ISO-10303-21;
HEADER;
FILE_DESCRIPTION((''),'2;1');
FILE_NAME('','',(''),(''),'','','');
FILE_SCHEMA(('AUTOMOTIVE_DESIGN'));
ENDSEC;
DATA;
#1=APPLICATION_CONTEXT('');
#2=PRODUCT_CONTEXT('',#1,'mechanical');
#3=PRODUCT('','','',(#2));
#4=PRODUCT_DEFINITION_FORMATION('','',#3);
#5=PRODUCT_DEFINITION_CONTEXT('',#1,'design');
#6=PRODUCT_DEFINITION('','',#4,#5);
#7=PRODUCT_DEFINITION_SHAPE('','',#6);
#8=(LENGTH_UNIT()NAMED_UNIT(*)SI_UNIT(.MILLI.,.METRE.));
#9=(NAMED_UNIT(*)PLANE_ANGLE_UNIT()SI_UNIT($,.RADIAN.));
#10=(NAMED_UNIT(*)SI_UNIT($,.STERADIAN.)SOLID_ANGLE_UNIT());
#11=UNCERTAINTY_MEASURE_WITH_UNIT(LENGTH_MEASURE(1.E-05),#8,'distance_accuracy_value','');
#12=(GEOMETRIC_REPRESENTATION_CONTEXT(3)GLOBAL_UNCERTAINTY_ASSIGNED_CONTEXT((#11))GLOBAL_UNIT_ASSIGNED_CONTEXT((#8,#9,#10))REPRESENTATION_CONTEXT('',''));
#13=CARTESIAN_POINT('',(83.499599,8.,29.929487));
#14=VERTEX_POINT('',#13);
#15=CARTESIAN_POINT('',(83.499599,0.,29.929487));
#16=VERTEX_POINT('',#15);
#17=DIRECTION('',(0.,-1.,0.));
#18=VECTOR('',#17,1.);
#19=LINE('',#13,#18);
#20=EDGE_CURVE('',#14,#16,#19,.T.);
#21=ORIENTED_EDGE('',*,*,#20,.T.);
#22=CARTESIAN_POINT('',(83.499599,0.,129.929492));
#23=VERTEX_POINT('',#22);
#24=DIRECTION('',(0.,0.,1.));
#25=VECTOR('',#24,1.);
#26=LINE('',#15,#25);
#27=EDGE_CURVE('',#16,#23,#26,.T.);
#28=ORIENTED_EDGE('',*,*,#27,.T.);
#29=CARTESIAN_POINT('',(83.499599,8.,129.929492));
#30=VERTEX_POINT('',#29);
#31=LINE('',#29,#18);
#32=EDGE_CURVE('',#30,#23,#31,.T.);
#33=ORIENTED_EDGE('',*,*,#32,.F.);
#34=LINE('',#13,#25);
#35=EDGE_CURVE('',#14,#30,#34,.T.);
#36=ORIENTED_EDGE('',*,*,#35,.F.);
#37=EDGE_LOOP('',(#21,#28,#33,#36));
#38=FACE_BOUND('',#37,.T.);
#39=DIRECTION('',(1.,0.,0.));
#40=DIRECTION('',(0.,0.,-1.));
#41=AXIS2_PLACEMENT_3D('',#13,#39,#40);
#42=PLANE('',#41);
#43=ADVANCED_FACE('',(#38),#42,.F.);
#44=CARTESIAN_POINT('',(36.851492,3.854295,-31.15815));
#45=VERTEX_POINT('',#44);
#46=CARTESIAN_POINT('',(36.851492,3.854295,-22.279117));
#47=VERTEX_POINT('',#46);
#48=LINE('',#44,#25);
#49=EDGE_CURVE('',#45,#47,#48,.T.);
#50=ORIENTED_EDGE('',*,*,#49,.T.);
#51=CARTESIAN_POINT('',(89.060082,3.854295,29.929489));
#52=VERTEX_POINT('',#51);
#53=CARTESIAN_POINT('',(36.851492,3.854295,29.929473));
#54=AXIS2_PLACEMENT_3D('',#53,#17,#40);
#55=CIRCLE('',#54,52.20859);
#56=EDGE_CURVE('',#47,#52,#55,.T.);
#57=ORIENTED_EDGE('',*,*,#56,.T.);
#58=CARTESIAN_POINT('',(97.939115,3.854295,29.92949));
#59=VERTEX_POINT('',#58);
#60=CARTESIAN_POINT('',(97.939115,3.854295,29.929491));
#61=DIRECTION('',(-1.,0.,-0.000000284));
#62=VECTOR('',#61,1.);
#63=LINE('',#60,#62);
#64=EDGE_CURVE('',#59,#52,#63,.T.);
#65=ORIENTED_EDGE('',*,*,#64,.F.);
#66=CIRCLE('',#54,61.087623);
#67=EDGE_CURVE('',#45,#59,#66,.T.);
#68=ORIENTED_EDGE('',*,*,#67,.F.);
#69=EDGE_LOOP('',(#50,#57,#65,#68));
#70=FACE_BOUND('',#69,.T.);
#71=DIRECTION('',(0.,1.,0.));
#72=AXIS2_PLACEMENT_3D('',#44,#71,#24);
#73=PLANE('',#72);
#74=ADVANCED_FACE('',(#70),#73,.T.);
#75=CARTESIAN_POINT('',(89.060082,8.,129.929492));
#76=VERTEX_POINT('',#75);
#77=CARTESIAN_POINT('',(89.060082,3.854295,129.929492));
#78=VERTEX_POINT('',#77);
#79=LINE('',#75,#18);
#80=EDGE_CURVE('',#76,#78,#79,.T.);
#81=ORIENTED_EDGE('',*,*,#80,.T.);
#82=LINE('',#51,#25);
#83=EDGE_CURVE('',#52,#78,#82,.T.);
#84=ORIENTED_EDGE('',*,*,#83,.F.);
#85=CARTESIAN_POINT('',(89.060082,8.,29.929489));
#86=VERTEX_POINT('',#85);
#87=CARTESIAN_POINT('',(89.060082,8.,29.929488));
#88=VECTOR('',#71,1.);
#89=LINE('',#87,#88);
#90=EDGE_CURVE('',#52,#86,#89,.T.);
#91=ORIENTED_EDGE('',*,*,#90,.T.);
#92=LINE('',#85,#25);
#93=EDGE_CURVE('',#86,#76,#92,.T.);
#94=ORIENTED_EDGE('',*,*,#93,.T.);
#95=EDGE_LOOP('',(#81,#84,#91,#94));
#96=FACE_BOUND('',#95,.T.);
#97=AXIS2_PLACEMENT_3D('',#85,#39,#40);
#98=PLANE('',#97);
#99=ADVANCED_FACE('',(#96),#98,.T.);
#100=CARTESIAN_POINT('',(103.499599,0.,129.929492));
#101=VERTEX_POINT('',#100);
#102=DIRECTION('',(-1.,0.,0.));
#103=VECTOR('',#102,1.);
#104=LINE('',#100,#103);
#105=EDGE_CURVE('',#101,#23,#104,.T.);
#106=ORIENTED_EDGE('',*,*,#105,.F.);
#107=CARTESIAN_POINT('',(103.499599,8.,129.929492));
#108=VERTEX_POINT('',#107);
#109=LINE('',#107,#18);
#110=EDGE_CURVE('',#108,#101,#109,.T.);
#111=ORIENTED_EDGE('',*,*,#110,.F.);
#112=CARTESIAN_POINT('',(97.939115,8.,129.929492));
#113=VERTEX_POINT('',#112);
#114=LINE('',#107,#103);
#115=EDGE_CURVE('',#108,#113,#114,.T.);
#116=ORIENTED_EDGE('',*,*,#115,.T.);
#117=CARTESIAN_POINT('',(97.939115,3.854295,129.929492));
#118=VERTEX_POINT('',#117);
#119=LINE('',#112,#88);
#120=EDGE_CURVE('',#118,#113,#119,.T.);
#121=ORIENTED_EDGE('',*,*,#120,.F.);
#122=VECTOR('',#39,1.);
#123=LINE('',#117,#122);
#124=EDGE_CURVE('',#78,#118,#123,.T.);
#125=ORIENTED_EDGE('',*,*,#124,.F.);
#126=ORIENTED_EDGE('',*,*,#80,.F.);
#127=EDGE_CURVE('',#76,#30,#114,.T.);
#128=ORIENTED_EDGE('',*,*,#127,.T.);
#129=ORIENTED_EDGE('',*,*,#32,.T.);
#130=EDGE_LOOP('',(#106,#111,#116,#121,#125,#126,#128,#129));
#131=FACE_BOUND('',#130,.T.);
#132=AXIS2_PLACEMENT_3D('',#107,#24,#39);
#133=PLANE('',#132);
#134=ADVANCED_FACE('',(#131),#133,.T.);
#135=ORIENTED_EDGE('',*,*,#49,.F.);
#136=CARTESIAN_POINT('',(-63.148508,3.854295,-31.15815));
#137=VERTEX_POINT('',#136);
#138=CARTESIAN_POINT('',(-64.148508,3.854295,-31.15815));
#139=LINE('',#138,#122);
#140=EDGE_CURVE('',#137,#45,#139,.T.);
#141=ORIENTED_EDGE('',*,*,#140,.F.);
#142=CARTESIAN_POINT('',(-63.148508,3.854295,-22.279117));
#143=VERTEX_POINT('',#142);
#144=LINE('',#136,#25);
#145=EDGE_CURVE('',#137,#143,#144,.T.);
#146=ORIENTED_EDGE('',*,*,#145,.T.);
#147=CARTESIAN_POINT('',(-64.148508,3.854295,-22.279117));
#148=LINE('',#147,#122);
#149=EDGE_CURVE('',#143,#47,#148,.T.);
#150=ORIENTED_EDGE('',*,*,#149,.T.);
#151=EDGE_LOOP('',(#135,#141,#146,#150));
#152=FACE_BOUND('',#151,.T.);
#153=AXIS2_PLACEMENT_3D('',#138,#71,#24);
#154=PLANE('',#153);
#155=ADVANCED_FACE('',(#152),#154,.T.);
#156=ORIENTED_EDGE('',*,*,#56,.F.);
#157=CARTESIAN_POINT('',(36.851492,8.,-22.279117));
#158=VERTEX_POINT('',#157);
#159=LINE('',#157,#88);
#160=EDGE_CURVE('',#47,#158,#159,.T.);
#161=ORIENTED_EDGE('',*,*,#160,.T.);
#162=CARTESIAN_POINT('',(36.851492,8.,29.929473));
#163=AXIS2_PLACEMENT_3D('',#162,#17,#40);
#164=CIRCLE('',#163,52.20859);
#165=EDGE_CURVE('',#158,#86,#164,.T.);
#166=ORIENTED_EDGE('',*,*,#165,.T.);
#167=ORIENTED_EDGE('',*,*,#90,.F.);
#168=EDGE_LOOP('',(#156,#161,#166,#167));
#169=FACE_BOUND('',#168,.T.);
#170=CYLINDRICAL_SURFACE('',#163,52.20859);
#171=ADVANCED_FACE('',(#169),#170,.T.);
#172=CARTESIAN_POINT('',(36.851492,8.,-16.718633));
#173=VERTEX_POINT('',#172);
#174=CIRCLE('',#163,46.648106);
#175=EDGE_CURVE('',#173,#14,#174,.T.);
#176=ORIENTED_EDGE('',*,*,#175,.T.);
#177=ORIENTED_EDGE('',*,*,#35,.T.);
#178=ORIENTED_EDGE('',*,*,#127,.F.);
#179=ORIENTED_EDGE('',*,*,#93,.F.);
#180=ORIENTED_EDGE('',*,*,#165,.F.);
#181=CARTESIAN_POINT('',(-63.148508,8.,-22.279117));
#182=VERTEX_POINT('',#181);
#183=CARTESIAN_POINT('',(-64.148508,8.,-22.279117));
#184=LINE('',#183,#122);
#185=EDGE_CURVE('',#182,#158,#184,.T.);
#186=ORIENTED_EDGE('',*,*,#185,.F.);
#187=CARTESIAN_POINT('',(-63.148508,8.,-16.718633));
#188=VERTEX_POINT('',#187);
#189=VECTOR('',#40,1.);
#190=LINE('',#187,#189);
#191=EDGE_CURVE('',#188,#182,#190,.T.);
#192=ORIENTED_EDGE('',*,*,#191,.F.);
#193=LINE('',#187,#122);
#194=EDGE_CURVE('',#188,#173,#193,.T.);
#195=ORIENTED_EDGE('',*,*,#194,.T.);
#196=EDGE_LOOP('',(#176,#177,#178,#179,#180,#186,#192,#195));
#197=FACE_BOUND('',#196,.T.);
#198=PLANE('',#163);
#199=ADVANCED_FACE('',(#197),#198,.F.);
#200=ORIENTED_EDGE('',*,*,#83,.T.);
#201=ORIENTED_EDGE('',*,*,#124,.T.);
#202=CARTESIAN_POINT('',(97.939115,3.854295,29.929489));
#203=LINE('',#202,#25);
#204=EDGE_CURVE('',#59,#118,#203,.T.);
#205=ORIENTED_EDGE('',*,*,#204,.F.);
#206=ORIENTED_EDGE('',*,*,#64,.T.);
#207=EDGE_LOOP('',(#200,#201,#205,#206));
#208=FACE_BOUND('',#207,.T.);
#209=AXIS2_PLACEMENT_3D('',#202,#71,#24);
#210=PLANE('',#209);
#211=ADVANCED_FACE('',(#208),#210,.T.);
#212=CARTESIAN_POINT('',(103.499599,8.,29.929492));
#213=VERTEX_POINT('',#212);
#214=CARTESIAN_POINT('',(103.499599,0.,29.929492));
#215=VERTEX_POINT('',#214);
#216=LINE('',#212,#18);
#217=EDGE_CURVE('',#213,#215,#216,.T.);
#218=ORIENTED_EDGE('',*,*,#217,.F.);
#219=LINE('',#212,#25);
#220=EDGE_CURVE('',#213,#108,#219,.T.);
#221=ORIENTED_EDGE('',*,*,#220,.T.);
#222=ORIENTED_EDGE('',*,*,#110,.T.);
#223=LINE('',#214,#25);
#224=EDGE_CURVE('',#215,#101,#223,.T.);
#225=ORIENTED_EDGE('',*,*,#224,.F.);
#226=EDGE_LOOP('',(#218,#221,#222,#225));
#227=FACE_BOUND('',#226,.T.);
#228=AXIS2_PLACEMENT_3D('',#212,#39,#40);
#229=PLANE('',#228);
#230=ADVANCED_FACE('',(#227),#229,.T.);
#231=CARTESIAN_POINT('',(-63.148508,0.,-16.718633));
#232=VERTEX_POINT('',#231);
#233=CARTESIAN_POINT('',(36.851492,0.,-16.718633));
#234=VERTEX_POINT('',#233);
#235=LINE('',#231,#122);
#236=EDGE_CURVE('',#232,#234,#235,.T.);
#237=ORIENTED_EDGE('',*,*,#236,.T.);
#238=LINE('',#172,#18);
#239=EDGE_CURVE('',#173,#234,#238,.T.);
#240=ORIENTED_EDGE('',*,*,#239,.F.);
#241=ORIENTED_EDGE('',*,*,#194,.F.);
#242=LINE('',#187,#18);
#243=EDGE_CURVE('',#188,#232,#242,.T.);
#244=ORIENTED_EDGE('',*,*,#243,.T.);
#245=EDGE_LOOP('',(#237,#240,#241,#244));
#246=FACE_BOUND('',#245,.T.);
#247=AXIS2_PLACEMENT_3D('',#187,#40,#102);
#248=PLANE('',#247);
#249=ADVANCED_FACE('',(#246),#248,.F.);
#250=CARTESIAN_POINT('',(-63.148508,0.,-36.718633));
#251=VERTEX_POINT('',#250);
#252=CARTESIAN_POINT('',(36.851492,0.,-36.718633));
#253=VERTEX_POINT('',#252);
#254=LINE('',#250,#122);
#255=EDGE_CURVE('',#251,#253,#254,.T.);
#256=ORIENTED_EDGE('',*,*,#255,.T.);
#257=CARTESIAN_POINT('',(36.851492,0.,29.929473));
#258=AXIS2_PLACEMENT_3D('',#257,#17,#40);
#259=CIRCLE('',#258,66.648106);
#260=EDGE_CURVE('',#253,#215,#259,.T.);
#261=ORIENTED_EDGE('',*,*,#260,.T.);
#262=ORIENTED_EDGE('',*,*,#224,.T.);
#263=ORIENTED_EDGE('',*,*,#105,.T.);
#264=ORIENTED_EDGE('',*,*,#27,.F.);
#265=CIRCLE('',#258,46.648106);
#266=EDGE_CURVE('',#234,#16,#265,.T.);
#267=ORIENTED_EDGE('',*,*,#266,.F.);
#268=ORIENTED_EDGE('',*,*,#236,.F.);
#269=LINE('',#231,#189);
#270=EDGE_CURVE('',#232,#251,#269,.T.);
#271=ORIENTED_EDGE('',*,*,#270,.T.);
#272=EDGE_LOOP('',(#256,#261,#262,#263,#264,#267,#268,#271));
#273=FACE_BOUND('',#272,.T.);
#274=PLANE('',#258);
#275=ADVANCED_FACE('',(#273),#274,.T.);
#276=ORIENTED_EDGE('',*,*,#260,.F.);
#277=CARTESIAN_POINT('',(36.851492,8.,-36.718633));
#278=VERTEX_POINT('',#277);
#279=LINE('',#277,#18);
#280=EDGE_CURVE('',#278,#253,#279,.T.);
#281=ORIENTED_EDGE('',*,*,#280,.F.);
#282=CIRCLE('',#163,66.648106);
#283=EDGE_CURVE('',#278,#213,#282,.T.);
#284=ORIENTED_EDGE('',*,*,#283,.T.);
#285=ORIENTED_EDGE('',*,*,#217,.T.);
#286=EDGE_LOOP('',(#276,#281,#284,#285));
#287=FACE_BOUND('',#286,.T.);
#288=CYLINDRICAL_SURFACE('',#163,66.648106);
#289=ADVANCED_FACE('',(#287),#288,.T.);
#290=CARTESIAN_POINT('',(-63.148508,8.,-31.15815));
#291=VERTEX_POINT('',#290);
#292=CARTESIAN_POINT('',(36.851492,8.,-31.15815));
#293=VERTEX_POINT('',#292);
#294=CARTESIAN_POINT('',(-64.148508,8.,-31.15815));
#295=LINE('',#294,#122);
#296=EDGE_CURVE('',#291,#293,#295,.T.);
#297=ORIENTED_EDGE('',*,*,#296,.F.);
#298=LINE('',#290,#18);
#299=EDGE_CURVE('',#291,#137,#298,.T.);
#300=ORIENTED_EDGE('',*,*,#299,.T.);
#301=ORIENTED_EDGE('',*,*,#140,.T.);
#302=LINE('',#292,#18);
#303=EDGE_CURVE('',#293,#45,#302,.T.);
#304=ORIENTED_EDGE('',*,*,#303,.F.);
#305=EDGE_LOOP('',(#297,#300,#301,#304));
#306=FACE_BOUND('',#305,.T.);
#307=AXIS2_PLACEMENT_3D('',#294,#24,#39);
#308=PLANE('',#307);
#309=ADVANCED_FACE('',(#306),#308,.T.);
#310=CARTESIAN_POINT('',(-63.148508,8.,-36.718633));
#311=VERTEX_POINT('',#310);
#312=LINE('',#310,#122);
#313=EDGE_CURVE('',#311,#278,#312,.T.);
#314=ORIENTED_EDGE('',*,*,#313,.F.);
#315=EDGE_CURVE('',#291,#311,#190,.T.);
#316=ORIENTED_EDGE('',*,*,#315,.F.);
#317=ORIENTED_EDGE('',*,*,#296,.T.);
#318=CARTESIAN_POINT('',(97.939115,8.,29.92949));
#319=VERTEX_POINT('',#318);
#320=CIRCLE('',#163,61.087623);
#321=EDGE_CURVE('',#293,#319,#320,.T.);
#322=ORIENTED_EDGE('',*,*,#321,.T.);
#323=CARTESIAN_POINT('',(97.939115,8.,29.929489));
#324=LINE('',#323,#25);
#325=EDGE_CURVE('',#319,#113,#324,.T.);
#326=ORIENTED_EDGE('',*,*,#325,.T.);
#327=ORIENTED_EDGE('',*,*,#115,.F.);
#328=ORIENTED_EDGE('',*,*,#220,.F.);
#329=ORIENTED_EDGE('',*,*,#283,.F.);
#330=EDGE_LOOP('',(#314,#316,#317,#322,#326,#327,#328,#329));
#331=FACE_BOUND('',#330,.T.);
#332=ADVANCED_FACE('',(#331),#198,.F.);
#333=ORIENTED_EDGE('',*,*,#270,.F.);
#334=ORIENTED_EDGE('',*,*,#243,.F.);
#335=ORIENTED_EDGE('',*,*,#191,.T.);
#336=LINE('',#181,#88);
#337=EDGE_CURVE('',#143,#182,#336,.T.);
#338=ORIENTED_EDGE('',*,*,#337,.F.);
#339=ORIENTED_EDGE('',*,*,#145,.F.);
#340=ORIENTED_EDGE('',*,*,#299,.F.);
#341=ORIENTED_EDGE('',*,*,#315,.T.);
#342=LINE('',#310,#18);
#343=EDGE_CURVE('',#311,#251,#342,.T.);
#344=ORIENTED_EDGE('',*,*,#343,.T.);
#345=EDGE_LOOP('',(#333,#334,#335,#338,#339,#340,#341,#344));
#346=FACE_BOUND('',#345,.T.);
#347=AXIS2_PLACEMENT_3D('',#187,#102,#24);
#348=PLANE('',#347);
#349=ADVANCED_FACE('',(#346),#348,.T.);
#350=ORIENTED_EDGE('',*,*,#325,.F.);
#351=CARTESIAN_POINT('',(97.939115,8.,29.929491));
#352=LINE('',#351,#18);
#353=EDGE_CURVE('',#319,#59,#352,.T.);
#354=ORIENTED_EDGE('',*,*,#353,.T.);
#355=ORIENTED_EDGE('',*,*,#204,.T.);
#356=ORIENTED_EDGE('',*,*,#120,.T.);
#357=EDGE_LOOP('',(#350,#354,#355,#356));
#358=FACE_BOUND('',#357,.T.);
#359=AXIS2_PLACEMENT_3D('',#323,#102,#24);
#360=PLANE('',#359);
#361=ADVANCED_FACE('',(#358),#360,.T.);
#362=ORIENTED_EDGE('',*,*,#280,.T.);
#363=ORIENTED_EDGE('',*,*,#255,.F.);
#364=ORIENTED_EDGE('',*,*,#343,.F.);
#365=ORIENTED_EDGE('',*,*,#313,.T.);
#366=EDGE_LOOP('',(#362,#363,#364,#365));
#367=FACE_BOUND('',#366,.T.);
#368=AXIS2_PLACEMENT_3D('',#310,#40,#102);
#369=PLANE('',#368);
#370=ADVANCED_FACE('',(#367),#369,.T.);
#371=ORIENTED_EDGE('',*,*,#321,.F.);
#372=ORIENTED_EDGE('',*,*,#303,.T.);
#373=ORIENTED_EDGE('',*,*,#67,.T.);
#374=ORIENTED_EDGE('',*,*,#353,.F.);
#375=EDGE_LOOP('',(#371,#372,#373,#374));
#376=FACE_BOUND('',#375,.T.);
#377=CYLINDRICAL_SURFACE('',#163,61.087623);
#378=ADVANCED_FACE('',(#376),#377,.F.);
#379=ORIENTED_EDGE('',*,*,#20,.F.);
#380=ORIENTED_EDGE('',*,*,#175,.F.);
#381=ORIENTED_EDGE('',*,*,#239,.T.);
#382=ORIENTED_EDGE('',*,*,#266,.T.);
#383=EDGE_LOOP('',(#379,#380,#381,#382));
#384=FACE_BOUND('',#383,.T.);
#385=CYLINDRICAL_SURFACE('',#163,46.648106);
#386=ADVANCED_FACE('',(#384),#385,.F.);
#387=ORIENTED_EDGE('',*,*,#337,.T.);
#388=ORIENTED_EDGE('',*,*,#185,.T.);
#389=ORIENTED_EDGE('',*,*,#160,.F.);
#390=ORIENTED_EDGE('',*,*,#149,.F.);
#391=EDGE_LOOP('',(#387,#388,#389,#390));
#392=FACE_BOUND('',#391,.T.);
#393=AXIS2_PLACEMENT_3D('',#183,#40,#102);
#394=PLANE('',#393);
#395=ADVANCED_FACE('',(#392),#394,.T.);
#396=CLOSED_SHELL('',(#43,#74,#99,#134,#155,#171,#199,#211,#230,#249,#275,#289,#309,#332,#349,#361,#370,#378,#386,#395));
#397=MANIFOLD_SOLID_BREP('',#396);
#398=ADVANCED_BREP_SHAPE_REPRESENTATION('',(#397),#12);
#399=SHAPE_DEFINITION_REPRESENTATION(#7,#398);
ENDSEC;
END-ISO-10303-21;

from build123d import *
from OCP.BRepAlgoAPI import BRepAlgoAPI_Cut
from OCP.TopTools import TopTools_ListOfShape

# Parameters (mm, degrees)
BOSS_EXTRUDE1_DEPTH = 8
SKETCH3_W           = 8.879033142
SKETCH3_H           = 4.145705198


with BuildPart() as part:
    # Sketch1 → Boss-Extrude1 (new body)
    with BuildSketch(Plane(origin=(0, 0, 0), x_dir=(1, 0, 0), z_dir=(0, 1, 0))):
        with BuildLine():
            Line((-63.148507742, 16.718633156), (36.851492258, 16.718633156))
            ThreePointArc((36.851492258, 16.718633156), (69.836689376, 3.055714409), (83.499598758, -29.92948659))
            Line((83.499598758, -29.92948659), (83.499598758, -129.929492269))
            Line((83.499598758, -129.929492269), (103.499598758, -129.929492269))
            Line((103.499598758, -129.929492269), (103.499598758, -29.929492269))
            ThreePointArc((103.499598758, -29.929492269), (83.978827008, 17.197848025), (36.851492258, 36.718633156))
            Line((36.851492258, 36.718633156), (-63.148507742, 36.718633156))
            Line((-63.148507742, 36.718633156), (-63.148507742, 16.718633156))
        make_face()
    extrude(amount=BOSS_EXTRUDE1_DEPTH)


with BuildPart() as cut_sweep1_tool:
    # Cut-Sweep1: sweep along a path in Sketch2
    with BuildLine(Plane(origin=(0, 8, 0), x_dir=(1, 0, 0), z_dir=(0, 1, 0))) as cut_sweep1_path:
        Line((-63.148507742, 26.718633156), (36.851492258, 26.718633156))
        ThreePointArc((36.851492258, 26.718633156), (76.907758192, 10.126781217), (93.499598758, -29.929489429))
        Line((93.499598758, -29.929489429), (93.499598758, -129.929492269))
    # Sketch3 → Cut-Sweep1 (sweep)
    with BuildSketch(Plane.ZY.offset(63.148507742)):
        with Locations((-26.718633156, 5.927147401)):
            Rectangle(SKETCH3_W, SKETCH3_H)
    sweep(path=cut_sweep1_path.line)


with BuildPart() as part_1:
    add(part.part)

    # Cut-Sweep1: cut by cut_sweep1_tool, with a tolerance
    cut_sweep1_stock = TopTools_ListOfShape()
    cut_sweep1_stock.Append(part_1.part.wrapped)
    cut_sweep1_tools = TopTools_ListOfShape()
    cut_sweep1_tools.Append(cut_sweep1_tool.part.wrapped)
    cut_sweep1_cut = BRepAlgoAPI_Cut()
    cut_sweep1_cut.SetArguments(cut_sweep1_stock)
    cut_sweep1_cut.SetTools(cut_sweep1_tools)
    cut_sweep1_cut.SetFuzzyValue(0.00001)
    cut_sweep1_cut.Build()
    add(Compound.cast(cut_sweep1_cut.Shape()).solids(), mode=Mode.REPLACE)


solid = part_1.part
